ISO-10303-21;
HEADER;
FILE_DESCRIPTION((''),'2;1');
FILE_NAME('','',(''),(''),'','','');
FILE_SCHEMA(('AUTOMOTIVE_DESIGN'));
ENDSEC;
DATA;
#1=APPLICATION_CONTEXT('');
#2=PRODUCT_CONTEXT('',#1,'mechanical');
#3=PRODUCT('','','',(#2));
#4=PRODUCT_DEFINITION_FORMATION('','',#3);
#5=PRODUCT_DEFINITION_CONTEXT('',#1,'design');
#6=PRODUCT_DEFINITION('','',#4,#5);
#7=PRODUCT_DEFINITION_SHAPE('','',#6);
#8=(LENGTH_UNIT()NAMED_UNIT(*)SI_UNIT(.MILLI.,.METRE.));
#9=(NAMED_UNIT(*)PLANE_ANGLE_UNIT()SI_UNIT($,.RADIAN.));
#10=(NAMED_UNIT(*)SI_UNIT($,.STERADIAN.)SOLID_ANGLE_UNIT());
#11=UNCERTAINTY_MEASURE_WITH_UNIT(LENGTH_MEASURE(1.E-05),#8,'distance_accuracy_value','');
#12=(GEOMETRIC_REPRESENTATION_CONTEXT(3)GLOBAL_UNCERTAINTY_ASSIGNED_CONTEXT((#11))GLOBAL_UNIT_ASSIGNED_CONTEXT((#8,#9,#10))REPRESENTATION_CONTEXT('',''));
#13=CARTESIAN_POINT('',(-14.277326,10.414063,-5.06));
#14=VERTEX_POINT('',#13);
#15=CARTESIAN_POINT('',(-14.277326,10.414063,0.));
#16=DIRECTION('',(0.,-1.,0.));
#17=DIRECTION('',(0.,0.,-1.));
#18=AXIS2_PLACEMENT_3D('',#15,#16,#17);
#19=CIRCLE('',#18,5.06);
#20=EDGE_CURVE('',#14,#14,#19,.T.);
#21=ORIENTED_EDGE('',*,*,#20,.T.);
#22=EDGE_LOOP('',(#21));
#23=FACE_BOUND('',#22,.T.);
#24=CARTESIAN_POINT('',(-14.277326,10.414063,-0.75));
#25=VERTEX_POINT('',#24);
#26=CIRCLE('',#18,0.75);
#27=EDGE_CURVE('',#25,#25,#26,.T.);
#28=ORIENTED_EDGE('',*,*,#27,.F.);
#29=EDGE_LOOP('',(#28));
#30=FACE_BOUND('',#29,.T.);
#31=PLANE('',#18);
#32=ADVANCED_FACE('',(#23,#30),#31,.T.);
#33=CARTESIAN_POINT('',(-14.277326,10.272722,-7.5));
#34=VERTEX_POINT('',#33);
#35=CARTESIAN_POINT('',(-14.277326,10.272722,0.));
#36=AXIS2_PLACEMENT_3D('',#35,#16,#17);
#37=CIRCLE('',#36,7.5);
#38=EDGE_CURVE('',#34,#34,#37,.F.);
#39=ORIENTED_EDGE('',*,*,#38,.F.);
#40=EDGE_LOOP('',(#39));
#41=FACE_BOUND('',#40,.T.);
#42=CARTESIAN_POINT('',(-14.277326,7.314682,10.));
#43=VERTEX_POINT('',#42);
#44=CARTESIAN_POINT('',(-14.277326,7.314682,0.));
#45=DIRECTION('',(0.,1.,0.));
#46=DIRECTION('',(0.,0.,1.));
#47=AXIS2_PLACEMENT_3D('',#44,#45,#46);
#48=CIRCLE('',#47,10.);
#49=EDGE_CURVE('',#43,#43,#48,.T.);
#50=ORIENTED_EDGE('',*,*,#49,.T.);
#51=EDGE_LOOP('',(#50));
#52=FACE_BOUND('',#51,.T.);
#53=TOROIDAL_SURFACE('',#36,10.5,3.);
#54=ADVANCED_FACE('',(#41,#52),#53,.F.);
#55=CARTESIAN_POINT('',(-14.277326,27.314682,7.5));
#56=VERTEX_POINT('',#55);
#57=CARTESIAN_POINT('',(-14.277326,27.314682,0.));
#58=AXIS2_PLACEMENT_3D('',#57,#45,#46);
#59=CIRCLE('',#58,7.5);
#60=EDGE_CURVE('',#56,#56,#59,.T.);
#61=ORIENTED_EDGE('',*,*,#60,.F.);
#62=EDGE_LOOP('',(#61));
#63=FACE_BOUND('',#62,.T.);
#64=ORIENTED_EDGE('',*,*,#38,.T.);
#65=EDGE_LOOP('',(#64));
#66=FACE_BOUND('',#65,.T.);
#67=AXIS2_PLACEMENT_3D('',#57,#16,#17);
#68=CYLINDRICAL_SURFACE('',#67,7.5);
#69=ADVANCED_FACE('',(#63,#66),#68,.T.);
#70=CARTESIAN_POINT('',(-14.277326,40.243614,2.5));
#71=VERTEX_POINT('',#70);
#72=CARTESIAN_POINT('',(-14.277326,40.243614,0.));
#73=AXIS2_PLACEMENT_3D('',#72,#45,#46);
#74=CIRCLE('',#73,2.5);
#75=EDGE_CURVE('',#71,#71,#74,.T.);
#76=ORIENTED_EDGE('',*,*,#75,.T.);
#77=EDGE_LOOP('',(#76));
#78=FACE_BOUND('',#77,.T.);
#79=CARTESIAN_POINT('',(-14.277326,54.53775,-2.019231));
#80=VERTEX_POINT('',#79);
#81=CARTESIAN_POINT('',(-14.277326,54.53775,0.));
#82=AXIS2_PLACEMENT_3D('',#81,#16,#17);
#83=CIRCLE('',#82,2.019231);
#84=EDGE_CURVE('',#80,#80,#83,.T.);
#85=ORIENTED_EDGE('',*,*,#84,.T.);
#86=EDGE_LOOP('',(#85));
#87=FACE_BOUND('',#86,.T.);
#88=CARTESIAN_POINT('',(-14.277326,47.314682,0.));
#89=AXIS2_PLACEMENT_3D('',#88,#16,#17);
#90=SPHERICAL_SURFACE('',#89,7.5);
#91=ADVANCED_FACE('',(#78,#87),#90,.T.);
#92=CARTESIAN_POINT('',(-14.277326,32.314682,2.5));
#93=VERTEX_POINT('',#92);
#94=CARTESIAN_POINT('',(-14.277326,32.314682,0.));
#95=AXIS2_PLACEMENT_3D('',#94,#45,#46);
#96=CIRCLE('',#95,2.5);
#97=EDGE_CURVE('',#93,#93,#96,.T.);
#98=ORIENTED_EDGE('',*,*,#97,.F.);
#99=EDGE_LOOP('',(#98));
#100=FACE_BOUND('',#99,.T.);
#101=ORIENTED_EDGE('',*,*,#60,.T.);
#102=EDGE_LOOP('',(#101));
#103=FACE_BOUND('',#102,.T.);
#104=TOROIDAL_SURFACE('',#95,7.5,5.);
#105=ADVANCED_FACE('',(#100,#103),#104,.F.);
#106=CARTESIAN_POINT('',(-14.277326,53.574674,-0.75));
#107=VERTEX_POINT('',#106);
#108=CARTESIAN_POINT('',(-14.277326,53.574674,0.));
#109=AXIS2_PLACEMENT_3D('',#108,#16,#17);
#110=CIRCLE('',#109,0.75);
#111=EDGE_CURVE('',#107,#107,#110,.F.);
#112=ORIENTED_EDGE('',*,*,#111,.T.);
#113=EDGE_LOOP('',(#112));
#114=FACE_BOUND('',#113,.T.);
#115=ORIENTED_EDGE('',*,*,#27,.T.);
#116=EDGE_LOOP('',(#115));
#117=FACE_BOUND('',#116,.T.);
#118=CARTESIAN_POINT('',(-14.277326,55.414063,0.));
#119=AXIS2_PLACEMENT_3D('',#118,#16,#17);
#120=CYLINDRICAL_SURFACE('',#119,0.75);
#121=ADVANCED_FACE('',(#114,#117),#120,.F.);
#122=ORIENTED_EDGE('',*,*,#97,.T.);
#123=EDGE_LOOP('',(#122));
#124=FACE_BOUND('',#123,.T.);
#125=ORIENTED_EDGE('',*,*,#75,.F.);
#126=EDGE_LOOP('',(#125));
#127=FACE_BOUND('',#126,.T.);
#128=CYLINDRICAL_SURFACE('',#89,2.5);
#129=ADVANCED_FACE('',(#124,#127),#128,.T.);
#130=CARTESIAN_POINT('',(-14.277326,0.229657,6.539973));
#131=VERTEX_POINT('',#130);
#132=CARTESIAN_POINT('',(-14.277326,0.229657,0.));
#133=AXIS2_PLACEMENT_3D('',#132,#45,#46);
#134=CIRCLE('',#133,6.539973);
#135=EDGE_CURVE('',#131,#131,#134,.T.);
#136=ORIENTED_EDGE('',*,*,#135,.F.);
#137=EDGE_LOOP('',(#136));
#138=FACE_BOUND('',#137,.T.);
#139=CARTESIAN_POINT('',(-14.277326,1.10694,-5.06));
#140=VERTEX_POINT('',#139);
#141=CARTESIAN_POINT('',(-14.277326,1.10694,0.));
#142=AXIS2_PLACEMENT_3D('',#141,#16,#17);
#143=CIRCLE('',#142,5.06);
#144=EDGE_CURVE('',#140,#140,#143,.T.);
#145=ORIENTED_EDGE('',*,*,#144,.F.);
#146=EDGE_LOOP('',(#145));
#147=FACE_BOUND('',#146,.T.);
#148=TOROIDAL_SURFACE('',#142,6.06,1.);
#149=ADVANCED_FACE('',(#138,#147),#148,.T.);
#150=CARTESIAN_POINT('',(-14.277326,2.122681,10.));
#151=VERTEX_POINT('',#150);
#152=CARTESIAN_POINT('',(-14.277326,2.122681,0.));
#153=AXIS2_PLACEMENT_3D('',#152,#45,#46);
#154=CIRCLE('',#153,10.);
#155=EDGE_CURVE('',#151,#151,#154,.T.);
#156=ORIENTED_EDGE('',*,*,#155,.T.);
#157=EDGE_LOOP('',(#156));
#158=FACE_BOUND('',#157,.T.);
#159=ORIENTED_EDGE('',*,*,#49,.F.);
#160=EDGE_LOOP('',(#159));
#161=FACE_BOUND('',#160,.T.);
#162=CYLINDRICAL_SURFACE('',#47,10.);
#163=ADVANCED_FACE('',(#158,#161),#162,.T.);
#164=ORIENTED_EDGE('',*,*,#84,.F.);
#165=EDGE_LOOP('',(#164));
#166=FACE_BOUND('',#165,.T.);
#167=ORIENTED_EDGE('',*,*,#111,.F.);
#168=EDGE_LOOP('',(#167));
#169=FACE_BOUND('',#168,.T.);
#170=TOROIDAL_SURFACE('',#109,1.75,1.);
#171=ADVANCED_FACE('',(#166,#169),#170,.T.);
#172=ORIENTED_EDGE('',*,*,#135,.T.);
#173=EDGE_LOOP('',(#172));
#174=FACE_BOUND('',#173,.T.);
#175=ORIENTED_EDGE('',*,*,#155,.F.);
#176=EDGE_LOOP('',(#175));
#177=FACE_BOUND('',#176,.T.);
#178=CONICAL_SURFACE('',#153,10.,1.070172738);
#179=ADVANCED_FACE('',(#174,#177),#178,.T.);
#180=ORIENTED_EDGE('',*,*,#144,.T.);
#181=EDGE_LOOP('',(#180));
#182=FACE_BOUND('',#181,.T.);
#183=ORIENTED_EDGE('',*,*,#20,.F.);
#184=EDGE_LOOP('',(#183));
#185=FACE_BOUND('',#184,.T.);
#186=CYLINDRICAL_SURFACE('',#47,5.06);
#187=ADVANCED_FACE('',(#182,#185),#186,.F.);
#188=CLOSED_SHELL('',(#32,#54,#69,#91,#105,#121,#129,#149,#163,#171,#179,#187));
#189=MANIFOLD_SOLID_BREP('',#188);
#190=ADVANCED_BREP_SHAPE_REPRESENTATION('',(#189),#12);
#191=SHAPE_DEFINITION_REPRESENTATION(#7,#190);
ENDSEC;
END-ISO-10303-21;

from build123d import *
from build123d.topology import SkipClean

# Parameters (mm, degrees)
SKETCH1_W           = 5.06
SKETCH1_H           = 1.900618781
FILLET1_R           = 1
SKETCH2_R           = 7.5
BOSS_EXTRUDE1_DEPTH = 20
SKETCH3_R           = 5.06
CUT_EXTRUDE1_DEPTH  = 5
SKETCH4_R           = 2.5
BOSS_EXTRUDE2_DEPTH = 20
FILLET2_R           = 5
SKETCH6_R           = 0.75
CUT_EXTRUDE2_DEPTH  = 45
FILLET3_R           = 1
FILLET4_R           = 3


# Some blends are built 0.0001 mm under size
with BuildPart() as part:
    # Sketch1 → Revolve1 (revolve)
    with BuildSketch(Plane.XY, mode=Mode.PRIVATE) as revolve1_sk:
        with Locations((-11.747326196, 6.364372648)):
            Rectangle(SKETCH1_W, SKETCH1_H)
        Polygon((-4.277326196, 2.122680798), (-4.277326196, 7.314682038), (-9.217326196, 7.314682038), (-9.217326196, 5.414063257), (-9.217326196, -0.580054764), align=None)
    revolve(revolve1_sk.sketch.rotate(Axis((-14.277326196, 7.314682038, 0), (0, -1, 0)), 90), axis=Axis((-14.277326196, 7.314682038, 0), (0, -1, 0)))

    # Fillet1
    fillet1_edges = [part.edges().sort_by_distance(p)[0] for p in [
        (-14.277326196, -0.580054764, -5.06),
    ]]
    fillet(fillet1_edges, radius=FILLET1_R)

    # Sketch2 → Boss-Extrude1 (add)
    with BuildSketch(Plane(origin=(0, 7.314682038, 0), x_dir=(1, 0, 0), z_dir=(0, 1, 0))):
        with Locations(Location((-14.277326196, 0, 0), (0, 0, 270))):
            Circle(SKETCH2_R)
    extrude(amount=BOSS_EXTRUDE1_DEPTH)

    # Sketch3 → Cut-Extrude1 (cut)
    with BuildSketch(Plane.XZ.offset(-5.414063257)):
        with Locations(Location((-14.277326196, 0, 0), (0, 0, 270))):
            Circle(SKETCH3_R)
    extrude(amount=-CUT_EXTRUDE1_DEPTH, mode=Mode.SUBTRACT)

    # Sketch4 → Boss-Extrude2 (add)
    with BuildSketch(Plane(origin=(0, 27.314682038, 0), x_dir=(1, 0, 0), z_dir=(0, 1, 0))):
        with Locations(Location((-14.277326196, 0, 0), (0, 0, 270))):
            Circle(SKETCH4_R)
    extrude(amount=BOSS_EXTRUDE2_DEPTH)

    # Sketch5 → Revolve2 (revolve)
    with SkipClean():  # the faces are left unmerged after this step: merging them gives an invalid solid
        with BuildSketch(Plane(origin=(0, 47.314682038, 0), x_dir=(1, 0, 0), z_dir=(0, 1, 0))):
            with BuildLine():
                ThreePointArc((-16.777326196, 0), (-14.277326196, 2.5), (-11.777326196, 0))
                Line((-11.777326196, 0), (-6.777326196, 0))
                ThreePointArc((-6.777326196, 0), (-14.277326196, 7.5), (-21.777326196, 0))
                Line((-21.777326196, 0), (-16.777326196, 0))
            make_face()
            with BuildLine():
                Line((-6.777326196, 0), (-11.777326196, 0))
                ThreePointArc((-11.777326196, 0), (-14.277326196, -2.5), (-16.777326196, 0))
                Line((-16.777326196, 0), (-21.777326196, 0))
                ThreePointArc((-21.777326196, 0), (-14.277326196, -7.5), (-6.777326196, 0))
            make_face()
            with BuildLine():
                ThreePointArc((-16.777326196, 0), (-14.277326196, -2.5), (-11.777326196, 0))
                Line((-11.777326196, 0), (-16.777326196, 0))
            make_face()
            with BuildLine():
                Line((-16.777326196, 0), (-11.777326196, 0))
                ThreePointArc((-11.777326196, 0), (-14.277326196, 2.5), (-16.777326196, 0))
            make_face()
        revolve(axis=Axis((-21.777326196, 47.314682038, 0), (1, 0, 0)))
    add(part.part.scale(1), mode=Mode.REPLACE)  # the faces are merged on a copy

    # Fillet2
    fillet2_edges = [part.edges().sort_by_distance(p)[0] for p in [
        (-14.277326196, 27.314682038, -2.5),
    ]]
    fillet(fillet2_edges, radius=FILLET2_R - 0.0001)  # a hair under: the kernel refuses the full size

    # Sketch6 → Cut-Extrude2 (cut)
    with BuildSketch(Plane.XZ.offset(-10.414063257)):
        with Locations(Location((-14.277326196, 0, 0), (0, 0, 270))):
            Circle(SKETCH6_R)
    extrude(amount=-CUT_EXTRUDE2_DEPTH, mode=Mode.SUBTRACT)

    # Fillet3
    fillet3_edges = [part.edges().sort_by_distance(p)[0] for p in [
        (-14.277326196, 54.777087816, 0.749999995),
    ]]
    fillet(fillet3_edges, radius=FILLET3_R)

    # Fillet4
    # the kernel refuses this fillet: 3 mm, written as the material it adds along each edge
    with BuildSketch(Plane(origin=(-14.277326196, 7.314682038, 0), x_dir=(0, 0, 1), z_dir=(-1, 0, 0))) as fillet4_piece_1:
        with BuildLine():
            CenterArc((10.5, 2.958039892), FILLET4_R, 180, 80.405931773)
            Line((10, 0), (9.99, -0.059160798))
            ThreePointArc((9.99, -0.059160798), (8.75, -0.06), (7.5, -0.06))
            Line((7.5, -0.06), (7.44, 0))
            Line((7.44, 0), (7.44, 2.958039892))
            Line((7.44, 2.958039892), (7.5, 2.958039892))
        make_face()
    revolve(axis=Axis((-14.277326196, 7.314682038, 0), (0, 1, 0)))


solid = part.part
